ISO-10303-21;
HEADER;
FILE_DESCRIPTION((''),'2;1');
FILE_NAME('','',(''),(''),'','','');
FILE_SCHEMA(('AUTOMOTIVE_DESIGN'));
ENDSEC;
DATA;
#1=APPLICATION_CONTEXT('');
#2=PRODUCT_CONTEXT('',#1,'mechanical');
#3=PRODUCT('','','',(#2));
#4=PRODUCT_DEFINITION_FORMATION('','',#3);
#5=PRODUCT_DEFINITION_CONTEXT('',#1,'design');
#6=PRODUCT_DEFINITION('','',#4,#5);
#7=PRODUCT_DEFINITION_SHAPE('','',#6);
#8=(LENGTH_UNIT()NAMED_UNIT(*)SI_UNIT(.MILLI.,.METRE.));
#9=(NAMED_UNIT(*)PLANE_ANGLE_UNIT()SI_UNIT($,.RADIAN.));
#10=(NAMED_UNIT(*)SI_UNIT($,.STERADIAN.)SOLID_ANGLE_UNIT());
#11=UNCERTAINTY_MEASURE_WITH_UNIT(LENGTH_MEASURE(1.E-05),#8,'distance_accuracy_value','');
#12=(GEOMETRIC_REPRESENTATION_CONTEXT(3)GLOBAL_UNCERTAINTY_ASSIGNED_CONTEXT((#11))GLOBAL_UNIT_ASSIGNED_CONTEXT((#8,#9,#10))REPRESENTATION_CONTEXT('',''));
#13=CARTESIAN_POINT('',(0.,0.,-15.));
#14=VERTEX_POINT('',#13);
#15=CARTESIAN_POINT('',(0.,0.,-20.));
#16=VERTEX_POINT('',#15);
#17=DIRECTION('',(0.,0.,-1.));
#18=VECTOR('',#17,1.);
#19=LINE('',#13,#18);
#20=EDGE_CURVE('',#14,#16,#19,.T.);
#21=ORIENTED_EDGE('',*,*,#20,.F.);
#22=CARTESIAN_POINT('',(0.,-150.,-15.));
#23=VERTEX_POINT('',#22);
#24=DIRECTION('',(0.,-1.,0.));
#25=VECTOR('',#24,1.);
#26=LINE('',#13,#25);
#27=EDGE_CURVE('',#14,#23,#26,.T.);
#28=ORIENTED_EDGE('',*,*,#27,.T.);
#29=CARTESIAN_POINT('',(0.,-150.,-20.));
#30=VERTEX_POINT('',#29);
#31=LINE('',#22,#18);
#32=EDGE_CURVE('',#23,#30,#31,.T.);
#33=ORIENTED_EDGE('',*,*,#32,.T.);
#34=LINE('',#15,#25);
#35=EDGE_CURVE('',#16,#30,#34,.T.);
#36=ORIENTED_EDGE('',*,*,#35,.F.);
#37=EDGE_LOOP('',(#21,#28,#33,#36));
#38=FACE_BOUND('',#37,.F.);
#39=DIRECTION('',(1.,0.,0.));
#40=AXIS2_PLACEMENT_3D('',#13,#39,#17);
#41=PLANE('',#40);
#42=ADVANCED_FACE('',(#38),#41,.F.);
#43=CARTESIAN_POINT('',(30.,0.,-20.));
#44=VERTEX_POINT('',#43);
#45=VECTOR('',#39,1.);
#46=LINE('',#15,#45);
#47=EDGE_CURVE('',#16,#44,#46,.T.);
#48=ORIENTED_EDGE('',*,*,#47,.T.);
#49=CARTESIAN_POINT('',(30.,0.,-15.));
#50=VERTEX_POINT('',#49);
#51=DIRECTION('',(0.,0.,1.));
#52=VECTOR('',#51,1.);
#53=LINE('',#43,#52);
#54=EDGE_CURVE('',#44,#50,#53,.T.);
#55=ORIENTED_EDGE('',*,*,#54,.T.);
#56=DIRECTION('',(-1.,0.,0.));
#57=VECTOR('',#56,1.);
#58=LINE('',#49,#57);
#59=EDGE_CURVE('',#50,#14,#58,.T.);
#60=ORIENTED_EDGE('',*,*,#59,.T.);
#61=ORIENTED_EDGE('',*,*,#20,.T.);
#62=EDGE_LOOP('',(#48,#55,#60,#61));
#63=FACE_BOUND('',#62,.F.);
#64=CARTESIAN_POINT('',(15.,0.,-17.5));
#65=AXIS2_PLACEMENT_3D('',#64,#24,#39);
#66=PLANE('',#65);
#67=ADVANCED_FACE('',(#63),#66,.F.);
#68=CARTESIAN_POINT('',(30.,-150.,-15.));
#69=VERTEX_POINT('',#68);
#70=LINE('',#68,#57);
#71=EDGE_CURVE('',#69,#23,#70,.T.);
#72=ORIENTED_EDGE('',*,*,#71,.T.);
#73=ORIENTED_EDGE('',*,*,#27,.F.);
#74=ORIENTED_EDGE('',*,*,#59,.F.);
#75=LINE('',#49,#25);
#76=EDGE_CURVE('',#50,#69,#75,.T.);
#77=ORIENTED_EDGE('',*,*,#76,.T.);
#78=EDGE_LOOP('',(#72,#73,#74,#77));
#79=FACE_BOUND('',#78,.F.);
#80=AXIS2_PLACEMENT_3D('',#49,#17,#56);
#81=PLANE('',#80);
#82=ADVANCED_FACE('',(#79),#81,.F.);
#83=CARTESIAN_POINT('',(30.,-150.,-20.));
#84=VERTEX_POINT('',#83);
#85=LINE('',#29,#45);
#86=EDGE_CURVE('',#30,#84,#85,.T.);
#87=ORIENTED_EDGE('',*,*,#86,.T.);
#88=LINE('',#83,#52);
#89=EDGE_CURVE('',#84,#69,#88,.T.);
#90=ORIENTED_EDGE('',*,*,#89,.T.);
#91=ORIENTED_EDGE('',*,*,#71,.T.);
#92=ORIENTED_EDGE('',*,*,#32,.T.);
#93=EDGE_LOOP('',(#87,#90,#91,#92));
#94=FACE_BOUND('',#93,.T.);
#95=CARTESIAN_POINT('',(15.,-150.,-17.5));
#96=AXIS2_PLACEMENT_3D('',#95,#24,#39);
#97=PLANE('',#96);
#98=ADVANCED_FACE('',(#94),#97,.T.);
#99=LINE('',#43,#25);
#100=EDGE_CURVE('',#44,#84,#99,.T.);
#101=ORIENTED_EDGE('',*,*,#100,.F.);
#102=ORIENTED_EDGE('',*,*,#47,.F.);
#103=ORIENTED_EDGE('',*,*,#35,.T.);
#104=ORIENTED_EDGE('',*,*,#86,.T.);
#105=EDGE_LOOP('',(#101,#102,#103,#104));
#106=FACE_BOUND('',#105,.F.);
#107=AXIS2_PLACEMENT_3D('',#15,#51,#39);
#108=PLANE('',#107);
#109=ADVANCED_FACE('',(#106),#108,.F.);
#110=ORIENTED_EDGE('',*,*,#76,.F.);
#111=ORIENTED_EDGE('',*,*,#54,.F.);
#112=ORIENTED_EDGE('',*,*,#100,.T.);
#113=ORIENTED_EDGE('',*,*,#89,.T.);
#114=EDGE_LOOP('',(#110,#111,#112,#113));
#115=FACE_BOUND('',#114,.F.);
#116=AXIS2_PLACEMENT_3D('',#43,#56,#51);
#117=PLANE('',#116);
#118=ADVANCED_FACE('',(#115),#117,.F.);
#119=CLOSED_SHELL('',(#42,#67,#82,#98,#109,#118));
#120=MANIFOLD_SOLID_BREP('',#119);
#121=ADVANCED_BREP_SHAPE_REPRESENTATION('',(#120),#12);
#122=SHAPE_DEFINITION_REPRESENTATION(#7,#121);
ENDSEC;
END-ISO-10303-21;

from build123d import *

# Parameters (mm, degrees)
F1_DEPTH = 150


# Not quite as in the source:
# - a feature names something its author has since deleted; it is built from what else it names


with BuildPart() as f1:
    # F0 (on Front) → F1 (new body)
    with BuildSketch(Plane.XZ):
        Polygon((30, -15), (3, -15), (0, -15), (0, -20), (30, -20), align=None)
    extrude(amount=F1_DEPTH)


solid = f1.part
